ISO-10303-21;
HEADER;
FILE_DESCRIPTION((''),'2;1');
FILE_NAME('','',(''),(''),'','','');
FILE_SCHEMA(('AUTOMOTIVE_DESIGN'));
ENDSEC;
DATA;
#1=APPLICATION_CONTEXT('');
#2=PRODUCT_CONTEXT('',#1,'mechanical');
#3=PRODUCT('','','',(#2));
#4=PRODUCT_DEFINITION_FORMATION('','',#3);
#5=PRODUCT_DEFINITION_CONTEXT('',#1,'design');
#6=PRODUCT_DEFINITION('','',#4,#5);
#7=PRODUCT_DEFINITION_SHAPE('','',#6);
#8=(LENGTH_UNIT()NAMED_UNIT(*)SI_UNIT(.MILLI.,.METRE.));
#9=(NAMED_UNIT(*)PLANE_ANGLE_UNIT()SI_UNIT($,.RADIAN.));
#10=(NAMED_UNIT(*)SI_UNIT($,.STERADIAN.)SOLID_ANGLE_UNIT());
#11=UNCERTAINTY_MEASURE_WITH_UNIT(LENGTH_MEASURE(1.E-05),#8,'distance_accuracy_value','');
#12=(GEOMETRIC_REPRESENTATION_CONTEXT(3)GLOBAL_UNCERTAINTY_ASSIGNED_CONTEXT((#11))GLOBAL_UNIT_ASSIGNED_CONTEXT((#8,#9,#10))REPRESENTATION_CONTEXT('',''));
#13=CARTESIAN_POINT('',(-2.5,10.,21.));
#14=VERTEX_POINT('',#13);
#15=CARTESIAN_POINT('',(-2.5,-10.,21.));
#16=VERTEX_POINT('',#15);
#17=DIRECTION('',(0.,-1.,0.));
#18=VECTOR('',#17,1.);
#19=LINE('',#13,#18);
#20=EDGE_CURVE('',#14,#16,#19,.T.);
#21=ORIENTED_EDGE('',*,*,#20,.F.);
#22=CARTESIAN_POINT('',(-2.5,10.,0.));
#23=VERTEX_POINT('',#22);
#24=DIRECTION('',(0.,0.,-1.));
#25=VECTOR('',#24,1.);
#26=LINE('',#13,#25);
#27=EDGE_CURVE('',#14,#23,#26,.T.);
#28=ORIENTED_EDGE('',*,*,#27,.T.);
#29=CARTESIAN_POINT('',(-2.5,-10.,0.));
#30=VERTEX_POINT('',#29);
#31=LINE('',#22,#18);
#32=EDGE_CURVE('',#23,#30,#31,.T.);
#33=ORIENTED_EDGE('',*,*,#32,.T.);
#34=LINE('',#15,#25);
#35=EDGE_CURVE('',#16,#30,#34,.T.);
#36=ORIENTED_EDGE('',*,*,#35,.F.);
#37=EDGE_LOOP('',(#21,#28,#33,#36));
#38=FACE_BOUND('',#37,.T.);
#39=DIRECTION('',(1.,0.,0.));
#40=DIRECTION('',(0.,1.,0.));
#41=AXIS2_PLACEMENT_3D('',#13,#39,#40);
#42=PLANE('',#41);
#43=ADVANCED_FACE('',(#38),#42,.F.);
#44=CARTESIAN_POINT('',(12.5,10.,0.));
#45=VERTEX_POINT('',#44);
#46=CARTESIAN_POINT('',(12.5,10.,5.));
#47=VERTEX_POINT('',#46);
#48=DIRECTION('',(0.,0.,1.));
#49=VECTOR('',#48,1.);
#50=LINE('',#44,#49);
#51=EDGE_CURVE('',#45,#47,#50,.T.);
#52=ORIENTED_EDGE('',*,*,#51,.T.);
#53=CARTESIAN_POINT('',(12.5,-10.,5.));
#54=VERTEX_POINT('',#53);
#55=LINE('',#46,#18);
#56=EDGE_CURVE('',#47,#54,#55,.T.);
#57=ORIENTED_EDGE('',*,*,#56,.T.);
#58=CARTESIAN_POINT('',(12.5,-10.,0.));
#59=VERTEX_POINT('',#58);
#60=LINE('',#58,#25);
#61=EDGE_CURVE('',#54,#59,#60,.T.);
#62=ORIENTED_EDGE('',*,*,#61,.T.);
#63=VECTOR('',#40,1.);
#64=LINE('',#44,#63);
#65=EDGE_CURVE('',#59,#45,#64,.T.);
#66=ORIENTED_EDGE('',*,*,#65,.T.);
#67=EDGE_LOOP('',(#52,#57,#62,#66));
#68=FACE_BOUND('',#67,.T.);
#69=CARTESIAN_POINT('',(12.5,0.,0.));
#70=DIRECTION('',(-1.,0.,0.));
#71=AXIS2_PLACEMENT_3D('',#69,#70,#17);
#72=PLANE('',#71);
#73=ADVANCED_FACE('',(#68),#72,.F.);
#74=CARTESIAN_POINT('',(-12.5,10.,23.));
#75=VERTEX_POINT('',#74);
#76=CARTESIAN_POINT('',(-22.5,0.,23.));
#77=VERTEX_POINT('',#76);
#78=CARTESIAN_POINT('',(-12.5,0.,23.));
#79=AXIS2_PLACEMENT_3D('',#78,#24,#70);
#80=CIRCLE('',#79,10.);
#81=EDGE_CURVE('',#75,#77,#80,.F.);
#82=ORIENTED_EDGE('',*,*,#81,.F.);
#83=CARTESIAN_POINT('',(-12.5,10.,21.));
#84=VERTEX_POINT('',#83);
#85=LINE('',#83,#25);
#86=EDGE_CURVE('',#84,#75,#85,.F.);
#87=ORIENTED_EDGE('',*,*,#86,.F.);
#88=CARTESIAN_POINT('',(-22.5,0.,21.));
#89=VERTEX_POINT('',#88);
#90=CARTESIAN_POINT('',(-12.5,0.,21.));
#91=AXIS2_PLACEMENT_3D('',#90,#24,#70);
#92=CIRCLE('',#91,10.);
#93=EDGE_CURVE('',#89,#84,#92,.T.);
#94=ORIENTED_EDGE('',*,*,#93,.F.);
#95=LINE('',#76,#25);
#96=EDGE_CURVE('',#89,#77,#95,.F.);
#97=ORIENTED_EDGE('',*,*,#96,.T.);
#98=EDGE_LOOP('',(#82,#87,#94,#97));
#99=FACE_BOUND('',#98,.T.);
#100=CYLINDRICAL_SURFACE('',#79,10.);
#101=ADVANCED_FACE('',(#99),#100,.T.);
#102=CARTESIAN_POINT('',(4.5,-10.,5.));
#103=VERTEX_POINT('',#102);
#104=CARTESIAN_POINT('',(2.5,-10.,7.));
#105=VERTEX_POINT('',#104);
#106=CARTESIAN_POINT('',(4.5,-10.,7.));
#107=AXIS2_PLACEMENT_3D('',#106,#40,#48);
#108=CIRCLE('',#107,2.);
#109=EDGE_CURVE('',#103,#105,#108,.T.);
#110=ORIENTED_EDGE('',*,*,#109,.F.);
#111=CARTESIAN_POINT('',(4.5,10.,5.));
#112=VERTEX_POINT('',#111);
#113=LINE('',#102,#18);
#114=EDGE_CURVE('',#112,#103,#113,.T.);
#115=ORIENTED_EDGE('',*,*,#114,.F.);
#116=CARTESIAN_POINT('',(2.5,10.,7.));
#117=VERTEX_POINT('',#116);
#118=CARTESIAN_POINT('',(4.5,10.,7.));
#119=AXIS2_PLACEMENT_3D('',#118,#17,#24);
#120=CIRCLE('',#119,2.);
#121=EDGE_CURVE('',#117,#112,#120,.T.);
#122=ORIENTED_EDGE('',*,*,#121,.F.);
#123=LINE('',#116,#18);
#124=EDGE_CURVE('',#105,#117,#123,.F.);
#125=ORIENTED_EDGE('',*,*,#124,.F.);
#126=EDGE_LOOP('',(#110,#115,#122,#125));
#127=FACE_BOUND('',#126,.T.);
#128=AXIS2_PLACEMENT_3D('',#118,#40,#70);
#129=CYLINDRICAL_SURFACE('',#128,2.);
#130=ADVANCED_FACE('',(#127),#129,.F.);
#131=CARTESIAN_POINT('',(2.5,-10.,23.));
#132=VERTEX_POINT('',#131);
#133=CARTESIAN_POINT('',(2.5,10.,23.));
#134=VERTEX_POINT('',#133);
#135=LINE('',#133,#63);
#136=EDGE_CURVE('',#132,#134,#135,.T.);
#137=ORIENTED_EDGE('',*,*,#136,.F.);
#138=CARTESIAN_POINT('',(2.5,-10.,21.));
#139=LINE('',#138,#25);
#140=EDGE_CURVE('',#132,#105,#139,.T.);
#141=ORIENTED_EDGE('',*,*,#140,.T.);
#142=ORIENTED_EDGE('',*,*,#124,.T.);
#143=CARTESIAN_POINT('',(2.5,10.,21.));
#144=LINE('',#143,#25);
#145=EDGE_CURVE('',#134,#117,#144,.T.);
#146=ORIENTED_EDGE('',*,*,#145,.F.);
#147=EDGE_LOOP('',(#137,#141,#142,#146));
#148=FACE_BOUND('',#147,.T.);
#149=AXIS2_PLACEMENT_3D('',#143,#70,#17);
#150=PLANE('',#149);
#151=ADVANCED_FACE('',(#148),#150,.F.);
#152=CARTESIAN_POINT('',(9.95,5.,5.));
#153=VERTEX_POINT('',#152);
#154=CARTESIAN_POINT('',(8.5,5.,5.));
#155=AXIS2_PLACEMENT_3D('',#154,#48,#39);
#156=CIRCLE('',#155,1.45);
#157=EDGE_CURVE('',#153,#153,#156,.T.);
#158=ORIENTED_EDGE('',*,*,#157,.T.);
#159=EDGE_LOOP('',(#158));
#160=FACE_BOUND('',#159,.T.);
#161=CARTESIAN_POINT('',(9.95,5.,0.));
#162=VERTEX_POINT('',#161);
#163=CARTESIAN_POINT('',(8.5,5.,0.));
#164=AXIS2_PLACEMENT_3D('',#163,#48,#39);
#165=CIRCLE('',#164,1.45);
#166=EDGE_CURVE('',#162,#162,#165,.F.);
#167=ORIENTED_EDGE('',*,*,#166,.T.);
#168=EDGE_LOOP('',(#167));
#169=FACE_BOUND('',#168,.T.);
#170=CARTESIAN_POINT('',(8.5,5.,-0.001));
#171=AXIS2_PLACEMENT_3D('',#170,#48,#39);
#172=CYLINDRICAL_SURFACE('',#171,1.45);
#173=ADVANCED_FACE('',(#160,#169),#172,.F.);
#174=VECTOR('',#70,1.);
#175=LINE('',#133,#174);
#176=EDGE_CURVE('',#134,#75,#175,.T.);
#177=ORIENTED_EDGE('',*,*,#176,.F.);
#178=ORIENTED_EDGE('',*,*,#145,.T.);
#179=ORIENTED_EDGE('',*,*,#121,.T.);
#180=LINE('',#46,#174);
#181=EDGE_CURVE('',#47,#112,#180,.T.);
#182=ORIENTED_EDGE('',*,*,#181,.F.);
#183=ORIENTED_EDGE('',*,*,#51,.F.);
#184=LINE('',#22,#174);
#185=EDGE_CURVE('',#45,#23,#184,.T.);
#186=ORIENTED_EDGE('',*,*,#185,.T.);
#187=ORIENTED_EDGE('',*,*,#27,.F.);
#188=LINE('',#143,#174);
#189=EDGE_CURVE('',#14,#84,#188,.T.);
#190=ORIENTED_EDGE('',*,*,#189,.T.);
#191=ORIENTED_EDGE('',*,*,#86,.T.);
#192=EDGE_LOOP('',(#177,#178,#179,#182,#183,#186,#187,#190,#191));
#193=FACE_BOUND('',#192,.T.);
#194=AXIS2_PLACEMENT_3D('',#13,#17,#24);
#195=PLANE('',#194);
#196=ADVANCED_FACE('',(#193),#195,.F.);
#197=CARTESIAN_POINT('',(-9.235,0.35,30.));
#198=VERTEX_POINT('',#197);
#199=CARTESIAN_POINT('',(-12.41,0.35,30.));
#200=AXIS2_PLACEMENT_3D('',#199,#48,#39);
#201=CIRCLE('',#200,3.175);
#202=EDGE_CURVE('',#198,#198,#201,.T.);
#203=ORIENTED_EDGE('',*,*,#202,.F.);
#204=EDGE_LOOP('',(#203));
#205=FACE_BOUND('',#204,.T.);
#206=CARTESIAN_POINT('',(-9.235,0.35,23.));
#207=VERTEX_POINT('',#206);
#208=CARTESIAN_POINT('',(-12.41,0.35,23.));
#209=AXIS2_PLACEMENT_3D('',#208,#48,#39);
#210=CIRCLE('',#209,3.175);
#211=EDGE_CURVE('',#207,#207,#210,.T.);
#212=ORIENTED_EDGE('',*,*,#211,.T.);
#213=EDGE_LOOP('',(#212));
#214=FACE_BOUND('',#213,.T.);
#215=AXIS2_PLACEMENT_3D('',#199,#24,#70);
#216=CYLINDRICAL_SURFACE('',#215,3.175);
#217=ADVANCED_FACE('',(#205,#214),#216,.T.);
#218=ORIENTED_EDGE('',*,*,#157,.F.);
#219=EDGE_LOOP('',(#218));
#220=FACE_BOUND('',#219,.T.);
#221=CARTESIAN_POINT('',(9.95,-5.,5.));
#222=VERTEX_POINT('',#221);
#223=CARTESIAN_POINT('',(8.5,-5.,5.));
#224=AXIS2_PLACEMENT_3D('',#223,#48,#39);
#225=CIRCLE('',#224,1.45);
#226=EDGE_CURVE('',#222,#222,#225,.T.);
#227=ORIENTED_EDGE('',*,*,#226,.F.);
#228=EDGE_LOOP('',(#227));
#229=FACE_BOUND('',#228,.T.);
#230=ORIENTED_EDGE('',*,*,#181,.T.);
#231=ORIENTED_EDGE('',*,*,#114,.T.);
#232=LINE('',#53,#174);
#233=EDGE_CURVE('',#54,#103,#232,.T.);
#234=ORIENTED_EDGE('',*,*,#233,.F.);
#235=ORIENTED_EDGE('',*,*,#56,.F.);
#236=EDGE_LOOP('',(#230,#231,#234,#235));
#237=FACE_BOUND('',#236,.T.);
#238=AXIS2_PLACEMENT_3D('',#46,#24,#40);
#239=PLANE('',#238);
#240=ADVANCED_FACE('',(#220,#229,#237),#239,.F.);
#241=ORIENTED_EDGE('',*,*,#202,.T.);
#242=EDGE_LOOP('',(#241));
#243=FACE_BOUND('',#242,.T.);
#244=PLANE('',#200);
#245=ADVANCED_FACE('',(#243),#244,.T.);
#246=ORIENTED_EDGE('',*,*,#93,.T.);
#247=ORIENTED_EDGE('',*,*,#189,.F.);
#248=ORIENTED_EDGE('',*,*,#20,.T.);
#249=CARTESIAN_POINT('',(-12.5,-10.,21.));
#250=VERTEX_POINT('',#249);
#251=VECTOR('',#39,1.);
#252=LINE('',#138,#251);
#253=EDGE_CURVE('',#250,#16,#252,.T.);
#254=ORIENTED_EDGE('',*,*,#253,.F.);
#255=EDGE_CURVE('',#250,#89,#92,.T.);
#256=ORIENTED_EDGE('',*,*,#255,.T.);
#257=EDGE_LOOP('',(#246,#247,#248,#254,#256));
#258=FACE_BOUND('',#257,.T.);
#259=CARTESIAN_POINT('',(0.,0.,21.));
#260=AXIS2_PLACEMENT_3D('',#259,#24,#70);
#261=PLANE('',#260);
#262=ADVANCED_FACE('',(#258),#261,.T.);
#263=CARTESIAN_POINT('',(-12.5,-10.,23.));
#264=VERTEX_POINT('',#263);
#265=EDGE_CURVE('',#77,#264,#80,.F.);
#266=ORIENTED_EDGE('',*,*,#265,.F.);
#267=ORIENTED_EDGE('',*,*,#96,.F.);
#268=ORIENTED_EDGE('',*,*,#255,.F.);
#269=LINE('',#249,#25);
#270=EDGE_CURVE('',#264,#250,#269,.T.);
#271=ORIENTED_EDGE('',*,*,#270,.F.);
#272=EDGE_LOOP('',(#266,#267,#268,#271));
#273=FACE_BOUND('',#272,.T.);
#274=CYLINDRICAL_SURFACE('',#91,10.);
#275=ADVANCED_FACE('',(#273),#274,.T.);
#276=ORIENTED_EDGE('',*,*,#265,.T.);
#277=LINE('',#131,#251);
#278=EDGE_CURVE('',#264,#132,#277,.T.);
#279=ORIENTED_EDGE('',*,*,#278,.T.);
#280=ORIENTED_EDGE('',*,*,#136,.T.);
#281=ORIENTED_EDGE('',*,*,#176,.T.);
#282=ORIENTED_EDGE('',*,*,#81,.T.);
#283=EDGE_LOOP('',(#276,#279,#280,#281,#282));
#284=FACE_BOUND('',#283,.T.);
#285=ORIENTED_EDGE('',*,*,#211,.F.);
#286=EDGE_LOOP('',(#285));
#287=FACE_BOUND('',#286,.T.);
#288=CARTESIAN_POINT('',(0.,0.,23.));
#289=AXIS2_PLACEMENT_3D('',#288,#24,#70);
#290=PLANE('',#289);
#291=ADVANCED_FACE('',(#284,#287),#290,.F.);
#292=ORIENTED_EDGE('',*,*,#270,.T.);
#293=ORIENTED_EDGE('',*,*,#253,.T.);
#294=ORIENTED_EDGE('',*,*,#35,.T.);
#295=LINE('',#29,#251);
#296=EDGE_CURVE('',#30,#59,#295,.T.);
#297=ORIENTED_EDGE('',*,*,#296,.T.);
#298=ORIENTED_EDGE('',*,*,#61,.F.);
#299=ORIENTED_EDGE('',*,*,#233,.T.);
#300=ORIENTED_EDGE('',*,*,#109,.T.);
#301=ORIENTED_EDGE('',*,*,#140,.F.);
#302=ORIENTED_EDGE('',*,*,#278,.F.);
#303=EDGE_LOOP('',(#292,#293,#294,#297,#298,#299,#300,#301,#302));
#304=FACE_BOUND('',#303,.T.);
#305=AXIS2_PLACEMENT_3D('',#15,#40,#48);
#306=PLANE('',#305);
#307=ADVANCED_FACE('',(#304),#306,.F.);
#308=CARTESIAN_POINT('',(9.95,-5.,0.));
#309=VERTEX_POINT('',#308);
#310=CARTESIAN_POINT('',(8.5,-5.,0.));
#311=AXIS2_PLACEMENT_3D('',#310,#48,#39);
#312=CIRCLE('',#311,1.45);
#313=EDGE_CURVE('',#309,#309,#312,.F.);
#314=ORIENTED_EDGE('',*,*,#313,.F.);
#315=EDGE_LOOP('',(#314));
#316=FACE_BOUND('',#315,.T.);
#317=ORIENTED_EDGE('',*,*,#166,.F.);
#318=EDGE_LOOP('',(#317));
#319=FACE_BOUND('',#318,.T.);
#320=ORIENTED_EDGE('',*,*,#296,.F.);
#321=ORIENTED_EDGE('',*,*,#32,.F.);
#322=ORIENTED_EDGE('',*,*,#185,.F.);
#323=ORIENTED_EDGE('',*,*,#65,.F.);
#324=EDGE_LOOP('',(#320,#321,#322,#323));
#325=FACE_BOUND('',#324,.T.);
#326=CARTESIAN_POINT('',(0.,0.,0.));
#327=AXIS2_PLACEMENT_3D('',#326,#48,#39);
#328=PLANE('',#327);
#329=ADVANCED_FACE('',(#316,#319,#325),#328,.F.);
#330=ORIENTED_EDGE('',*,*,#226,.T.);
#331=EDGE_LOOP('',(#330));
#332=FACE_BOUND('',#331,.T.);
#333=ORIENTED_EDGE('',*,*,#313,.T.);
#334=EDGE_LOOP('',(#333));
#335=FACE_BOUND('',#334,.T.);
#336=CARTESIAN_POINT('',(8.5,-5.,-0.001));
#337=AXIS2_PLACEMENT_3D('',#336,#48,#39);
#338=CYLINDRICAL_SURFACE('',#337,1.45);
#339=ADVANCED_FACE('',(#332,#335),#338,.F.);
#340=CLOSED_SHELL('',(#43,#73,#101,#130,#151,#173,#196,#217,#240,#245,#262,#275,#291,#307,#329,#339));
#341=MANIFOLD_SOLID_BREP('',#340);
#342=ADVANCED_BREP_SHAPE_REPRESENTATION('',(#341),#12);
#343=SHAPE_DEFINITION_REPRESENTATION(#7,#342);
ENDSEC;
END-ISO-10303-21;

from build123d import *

# Parameters (mm, degrees)
ESQUISSE1_W             = 5
ESQUISSE1_H             = 20
BOSS_EXTRU_1_DEPTH      = 21
ESQUISSE2_W             = 25
ESQUISSE2_H             = 20
BOSS_EXTRU_2_DEPTH      = 2
ESQUISSE3_R             = 3.175
BOSS_EXTRU_3_DEPTH      = 7
CONG_1_R                = 10
ESQUISSE5_W             = 5
ESQUISSE5_H             = 20
BOSS_EXTRU_4_DEPTH      = 10
CONG_2_R                = 2
ENL_V_MAT_EXTRU_1_REACH = 37.089
ESQUISSE6_R             = 1.45


with BuildPart() as part:
    # Esquisse1 → Boss.-Extru.1 (new body)
    with BuildSketch(Plane.XY):
        Rectangle(ESQUISSE1_W, ESQUISSE1_H)
    extrude(amount=BOSS_EXTRU_1_DEPTH)

    # Esquisse2 → Boss.-Extru.2 (add)
    with BuildSketch(Plane.XY.offset(21)):
        with Locations((-10, 0)):
            Rectangle(ESQUISSE2_W, ESQUISSE2_H)
    extrude(amount=BOSS_EXTRU_2_DEPTH)

    # Esquisse3 → Boss.-Extru.3 (add)
    with BuildSketch(Plane.XY.offset(23)):
        with Locations((-12.41, 0.35)):
            Circle(ESQUISSE3_R)
    extrude(amount=BOSS_EXTRU_3_DEPTH)

    # Congé1
    cong_1_edges = [part.edges().sort_by_distance(p)[0] for p in [
        (-22.5, 10, 22),
        (-22.5, -10, 22),
    ]]
    fillet(cong_1_edges, radius=CONG_1_R - 0.0001)  # a hair under: the kernel refuses the full size

    # Esquisse5 → Boss.-Extru.4 (add)
    with BuildSketch(Plane(origin=(2.5, 0, 0), x_dir=(0, 0, -1), z_dir=(1, 0, 0))):
        with Locations((-2.5, 0)):
            Rectangle(ESQUISSE5_W, ESQUISSE5_H)
    extrude(amount=BOSS_EXTRU_4_DEPTH)

    # Congé2
    cong_2_edges = [part.edges().sort_by_distance(p)[0] for p in [
        (2.5, 0, 5),
    ]]
    fillet(cong_2_edges, radius=CONG_2_R)

    # Esquisse6 → Enlèv. mat.-Extru.1 (cut, up to next)
    with BuildSketch(Plane.XY.offset(5), mode=Mode.PRIVATE) as enl_v_mat_extru_1_sk1:
        with Locations((8.5, 5)):
            Circle(ESQUISSE6_R)
    enl_v_mat_extru_1_tool1 = extrude(enl_v_mat_extru_1_sk1.sketch, amount=-ENL_V_MAT_EXTRU_1_REACH, mode=Mode.PRIVATE) & part.part
    # Esquisse6 → Enlèv. mat.-Extru.1 (cut, up to next)
    with BuildSketch(Plane.XY.offset(5), mode=Mode.PRIVATE) as enl_v_mat_extru_1_sk2:
        with Locations((8.5, -5)):
            Circle(ESQUISSE6_R)
    enl_v_mat_extru_1_tool2 = extrude(enl_v_mat_extru_1_sk2.sketch, amount=-ENL_V_MAT_EXTRU_1_REACH, mode=Mode.PRIVATE) & part.part
    add(enl_v_mat_extru_1_tool1.solids().sort_by_distance((8.5, 5, 5))[0], mode=Mode.SUBTRACT)
    add(enl_v_mat_extru_1_tool2.solids().sort_by_distance((8.5, -5, 5))[0], mode=Mode.SUBTRACT)


solid = part.part
